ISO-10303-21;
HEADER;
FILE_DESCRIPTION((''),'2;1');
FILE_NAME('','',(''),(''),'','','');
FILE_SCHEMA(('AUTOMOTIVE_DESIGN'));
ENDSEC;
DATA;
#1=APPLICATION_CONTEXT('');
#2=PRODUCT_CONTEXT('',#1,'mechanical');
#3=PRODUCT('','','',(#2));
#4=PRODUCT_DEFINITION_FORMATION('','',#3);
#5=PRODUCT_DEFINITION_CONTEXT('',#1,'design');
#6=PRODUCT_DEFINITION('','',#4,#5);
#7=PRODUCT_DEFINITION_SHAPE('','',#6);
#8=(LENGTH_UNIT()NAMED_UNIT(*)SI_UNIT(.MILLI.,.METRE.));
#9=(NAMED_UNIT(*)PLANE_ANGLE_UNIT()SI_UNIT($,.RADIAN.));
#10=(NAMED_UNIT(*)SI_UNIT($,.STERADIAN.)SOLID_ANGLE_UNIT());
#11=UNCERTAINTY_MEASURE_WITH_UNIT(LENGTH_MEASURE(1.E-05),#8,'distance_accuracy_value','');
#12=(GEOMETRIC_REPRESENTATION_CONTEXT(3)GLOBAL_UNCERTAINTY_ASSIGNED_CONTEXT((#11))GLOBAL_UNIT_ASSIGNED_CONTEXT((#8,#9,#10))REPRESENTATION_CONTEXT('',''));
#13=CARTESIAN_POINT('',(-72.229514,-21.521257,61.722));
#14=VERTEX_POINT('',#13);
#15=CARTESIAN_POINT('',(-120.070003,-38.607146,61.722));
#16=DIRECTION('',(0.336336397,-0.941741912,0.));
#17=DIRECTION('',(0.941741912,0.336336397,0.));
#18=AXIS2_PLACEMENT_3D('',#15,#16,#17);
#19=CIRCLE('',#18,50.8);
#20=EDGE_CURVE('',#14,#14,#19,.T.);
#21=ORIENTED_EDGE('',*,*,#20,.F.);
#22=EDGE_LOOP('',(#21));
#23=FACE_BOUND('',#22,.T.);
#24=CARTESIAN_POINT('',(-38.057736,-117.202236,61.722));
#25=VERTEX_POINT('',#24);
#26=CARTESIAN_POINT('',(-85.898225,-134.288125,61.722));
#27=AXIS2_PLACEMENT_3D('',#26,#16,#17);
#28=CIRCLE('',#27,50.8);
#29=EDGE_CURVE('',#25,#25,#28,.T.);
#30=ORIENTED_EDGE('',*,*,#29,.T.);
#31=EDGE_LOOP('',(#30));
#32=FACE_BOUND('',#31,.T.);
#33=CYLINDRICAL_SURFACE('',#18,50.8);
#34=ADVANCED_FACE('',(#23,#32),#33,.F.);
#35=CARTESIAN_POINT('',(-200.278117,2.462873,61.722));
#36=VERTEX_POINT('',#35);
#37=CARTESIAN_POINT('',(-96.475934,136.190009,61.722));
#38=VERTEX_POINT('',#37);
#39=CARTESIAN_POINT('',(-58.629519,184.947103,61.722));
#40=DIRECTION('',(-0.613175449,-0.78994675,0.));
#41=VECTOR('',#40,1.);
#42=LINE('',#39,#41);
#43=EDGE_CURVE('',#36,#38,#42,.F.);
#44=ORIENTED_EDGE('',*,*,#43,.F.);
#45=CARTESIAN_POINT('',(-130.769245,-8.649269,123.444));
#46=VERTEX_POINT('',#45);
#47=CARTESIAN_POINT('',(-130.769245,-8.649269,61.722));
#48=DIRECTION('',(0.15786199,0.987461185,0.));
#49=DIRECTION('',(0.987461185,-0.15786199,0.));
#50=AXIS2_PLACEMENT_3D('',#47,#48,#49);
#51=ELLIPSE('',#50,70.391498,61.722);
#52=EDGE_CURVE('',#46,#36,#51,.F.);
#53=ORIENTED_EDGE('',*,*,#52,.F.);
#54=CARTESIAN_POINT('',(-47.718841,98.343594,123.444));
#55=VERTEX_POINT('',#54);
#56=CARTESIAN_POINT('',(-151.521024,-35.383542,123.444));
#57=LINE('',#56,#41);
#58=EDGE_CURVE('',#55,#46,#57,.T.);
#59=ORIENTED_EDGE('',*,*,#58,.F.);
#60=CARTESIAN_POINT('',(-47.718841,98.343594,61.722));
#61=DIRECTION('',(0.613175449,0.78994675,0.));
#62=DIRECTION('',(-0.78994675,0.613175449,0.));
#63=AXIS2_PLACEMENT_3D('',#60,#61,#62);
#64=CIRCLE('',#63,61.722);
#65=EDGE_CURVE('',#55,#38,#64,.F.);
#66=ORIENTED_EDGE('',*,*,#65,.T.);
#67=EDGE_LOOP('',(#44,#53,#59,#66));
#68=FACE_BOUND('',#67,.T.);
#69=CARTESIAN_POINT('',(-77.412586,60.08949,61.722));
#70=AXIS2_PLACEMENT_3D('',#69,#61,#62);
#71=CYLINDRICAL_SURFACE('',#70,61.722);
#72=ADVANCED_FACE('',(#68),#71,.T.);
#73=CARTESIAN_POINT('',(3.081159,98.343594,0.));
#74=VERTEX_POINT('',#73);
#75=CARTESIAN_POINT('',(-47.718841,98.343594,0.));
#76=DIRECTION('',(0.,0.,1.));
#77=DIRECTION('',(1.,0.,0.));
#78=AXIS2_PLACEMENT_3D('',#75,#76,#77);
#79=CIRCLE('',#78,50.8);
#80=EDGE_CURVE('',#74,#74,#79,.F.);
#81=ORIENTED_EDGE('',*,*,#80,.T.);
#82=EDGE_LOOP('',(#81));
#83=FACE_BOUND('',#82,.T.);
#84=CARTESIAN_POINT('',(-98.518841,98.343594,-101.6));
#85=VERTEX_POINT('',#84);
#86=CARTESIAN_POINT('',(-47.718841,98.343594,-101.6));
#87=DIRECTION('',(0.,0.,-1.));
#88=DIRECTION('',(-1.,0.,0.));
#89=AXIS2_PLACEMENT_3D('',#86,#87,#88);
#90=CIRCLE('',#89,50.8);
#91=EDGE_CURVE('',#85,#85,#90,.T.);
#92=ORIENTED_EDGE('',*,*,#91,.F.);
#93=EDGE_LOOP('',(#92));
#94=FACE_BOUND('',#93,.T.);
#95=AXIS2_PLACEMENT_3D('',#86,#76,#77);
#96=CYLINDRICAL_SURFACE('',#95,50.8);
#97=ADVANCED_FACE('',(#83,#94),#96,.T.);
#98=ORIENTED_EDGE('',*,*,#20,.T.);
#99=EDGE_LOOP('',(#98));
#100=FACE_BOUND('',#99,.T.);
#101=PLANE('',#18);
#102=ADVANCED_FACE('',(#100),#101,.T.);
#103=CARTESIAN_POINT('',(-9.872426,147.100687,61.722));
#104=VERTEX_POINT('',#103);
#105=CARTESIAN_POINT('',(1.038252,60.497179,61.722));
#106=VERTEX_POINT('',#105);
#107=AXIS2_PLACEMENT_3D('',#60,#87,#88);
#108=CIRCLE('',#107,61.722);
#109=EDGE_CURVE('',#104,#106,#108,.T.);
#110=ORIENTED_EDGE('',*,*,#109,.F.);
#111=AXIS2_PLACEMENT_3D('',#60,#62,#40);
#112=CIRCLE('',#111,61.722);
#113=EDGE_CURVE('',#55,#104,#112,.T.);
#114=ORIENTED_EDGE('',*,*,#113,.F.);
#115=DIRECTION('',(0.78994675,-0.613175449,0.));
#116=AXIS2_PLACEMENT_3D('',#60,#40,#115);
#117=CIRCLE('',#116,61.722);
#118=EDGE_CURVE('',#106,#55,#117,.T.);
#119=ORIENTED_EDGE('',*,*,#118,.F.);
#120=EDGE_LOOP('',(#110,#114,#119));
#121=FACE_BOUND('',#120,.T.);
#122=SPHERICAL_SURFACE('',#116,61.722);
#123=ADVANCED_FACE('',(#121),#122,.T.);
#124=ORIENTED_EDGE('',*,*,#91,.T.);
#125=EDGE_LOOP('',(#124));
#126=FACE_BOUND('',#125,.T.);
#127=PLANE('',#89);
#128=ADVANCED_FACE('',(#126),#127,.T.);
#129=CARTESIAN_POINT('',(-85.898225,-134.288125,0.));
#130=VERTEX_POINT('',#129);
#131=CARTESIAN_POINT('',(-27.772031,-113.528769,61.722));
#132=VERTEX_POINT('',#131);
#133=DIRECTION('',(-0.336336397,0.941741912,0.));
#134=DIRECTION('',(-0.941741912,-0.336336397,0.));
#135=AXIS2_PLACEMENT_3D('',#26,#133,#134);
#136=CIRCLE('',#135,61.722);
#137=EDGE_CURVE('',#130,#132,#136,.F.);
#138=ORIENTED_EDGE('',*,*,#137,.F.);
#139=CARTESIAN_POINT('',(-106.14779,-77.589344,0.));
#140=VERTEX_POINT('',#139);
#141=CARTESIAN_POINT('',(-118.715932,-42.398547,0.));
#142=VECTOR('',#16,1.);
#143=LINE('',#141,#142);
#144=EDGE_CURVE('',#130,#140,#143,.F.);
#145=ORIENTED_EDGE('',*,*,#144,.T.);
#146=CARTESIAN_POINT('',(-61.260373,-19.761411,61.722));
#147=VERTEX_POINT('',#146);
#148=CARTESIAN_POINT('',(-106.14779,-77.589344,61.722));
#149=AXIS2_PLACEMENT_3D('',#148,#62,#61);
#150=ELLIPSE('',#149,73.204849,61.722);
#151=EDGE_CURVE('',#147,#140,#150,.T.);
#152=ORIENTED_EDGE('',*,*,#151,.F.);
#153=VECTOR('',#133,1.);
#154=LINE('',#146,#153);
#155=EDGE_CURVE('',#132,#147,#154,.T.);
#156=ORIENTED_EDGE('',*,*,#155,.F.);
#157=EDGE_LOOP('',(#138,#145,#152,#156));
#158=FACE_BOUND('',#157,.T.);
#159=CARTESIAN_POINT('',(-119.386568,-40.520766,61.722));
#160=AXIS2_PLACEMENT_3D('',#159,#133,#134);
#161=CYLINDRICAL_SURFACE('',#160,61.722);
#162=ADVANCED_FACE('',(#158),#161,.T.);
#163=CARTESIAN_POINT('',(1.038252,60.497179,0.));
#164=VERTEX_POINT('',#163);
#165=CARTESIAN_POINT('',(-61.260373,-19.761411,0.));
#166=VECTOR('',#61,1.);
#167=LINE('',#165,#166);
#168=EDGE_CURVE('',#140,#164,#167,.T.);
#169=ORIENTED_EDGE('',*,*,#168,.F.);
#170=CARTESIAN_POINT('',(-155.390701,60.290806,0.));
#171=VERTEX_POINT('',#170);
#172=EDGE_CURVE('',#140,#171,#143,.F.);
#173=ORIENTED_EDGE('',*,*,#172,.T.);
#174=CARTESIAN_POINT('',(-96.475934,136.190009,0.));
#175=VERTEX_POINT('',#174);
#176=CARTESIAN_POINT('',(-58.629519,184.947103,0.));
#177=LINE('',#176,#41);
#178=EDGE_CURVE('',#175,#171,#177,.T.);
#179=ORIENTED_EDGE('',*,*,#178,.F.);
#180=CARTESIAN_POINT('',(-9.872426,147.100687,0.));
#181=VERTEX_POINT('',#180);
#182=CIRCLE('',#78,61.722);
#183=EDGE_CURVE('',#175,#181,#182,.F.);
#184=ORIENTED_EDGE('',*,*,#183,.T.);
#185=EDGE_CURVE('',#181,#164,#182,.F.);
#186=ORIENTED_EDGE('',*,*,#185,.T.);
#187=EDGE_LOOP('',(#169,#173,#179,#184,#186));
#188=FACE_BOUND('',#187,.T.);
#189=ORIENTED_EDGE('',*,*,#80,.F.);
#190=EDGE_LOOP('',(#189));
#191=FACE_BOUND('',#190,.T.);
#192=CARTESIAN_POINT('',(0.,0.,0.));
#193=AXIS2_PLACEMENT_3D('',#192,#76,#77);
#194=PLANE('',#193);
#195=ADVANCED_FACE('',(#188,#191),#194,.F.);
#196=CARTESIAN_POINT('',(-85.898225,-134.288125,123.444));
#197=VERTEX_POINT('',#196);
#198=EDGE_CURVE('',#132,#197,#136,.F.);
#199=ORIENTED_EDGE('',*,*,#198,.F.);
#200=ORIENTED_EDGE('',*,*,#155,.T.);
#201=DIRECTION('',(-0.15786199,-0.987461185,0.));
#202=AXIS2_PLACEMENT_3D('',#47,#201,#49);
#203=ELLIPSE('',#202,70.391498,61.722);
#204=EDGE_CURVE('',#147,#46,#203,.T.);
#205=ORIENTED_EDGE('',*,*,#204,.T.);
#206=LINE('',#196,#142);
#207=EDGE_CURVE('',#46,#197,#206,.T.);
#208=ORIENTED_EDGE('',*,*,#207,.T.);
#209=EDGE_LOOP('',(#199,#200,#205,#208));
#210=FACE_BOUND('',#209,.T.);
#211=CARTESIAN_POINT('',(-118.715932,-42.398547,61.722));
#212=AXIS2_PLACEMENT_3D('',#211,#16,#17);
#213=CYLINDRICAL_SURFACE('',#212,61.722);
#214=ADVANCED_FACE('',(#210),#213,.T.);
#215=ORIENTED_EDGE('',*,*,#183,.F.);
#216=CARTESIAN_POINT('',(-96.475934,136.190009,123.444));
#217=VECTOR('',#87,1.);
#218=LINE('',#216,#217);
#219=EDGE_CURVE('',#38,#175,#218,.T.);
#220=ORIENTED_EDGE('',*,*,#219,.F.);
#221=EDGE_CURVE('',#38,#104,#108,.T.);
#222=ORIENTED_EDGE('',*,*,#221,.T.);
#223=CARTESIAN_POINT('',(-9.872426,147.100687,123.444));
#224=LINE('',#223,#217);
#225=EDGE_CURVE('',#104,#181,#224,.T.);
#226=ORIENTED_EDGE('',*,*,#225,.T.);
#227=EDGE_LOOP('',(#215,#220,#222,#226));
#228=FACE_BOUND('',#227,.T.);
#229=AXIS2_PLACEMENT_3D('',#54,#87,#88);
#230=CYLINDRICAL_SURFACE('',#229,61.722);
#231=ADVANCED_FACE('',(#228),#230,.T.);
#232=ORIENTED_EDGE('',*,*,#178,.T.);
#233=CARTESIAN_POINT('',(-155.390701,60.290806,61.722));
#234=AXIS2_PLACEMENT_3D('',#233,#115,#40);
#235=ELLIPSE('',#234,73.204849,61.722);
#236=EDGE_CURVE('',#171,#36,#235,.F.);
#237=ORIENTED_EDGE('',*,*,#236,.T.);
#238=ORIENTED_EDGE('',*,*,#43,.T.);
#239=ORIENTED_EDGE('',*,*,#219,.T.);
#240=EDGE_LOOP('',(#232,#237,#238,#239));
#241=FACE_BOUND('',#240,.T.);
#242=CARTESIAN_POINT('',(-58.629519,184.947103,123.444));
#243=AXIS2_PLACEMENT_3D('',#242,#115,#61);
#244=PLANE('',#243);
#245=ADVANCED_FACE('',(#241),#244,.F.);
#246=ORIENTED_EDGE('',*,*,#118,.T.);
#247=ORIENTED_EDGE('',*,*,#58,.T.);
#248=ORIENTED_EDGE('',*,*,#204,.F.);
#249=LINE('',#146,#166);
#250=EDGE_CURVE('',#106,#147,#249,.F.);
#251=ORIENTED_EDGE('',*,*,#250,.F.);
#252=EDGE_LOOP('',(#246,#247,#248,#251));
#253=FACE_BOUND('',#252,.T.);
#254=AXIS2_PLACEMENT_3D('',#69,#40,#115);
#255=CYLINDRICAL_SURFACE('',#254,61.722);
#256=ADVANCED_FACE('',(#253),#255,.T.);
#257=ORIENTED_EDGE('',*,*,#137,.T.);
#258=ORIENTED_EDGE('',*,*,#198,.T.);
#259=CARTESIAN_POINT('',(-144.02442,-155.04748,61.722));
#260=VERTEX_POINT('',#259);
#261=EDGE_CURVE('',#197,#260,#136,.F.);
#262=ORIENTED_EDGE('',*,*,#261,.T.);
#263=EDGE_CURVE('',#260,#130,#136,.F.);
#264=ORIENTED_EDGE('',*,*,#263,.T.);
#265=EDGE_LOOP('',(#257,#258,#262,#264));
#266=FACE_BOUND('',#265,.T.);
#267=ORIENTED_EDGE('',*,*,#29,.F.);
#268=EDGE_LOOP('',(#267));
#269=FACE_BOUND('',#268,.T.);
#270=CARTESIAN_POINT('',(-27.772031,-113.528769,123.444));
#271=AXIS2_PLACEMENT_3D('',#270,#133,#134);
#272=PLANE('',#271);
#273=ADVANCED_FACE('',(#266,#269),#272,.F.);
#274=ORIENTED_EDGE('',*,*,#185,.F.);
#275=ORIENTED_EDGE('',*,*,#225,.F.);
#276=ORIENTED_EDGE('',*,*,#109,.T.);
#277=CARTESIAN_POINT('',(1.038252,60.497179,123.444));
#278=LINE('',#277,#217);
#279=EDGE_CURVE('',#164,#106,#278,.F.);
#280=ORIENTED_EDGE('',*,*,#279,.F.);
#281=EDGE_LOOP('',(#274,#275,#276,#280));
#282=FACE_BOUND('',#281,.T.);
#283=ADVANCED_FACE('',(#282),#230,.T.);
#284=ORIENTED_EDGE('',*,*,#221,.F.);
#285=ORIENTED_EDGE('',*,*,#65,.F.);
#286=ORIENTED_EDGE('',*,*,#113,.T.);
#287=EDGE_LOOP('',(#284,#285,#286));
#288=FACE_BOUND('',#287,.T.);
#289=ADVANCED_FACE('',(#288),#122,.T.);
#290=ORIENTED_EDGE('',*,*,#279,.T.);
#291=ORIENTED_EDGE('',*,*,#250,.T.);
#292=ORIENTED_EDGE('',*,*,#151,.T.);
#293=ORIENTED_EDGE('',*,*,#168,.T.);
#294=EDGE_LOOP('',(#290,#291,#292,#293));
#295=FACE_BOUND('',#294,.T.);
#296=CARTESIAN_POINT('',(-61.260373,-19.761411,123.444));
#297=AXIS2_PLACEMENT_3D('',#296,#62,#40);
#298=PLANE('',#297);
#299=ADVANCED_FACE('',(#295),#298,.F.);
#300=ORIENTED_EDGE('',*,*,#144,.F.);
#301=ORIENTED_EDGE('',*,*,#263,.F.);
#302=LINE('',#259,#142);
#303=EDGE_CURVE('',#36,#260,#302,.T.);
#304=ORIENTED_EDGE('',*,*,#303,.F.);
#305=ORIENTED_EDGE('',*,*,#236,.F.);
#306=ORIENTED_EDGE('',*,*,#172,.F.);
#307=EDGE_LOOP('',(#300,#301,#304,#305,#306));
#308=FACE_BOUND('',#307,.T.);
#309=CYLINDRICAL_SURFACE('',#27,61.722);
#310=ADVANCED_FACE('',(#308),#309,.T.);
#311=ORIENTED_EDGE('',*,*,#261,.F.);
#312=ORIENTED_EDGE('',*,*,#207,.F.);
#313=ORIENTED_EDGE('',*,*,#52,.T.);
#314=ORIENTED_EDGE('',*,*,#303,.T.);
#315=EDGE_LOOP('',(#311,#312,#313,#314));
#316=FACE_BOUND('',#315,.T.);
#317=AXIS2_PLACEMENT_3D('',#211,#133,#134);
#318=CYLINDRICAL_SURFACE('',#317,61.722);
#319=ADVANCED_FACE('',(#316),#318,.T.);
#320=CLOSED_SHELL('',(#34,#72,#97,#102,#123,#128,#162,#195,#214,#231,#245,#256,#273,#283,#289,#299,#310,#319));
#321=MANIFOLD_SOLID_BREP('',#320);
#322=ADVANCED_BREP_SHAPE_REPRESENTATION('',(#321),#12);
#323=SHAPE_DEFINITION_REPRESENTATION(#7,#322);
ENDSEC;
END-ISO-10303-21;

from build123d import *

# Parameters (mm, degrees)
BOSS_EXTRUDE1_DEPTH = 123.444
FILLET1_R           = 61.722
FILLET2_R           = 61.722
SKETCH3_R           = 50.800000000000004
BOSS_EXTRUDE2_DEPTH = 101.6
SKETCH4_R           = 50.8
CUT_EXTRUDE1_DEPTH  = 101.6


with BuildPart() as part:
    # Sketch1 → Boss-Extrude1 (new body)
    with BuildSketch(Plane.XY):
        Polygon((-61.2603734439835, -19.761410788381728), (38.88466731371064, 109.25427234990879), (-58.62951931958517, 184.9471025337958), (-200.27811700244362, 2.4628730865096857), (-144.02441960258417, -155.04747963309688), (-27.772031067671065, -113.52876944205649), align=None)
    extrude(amount=BOSS_EXTRUDE1_DEPTH)

    # Fillet1
    fillet1_edges = [part.edges().sort_by_distance(p)[0] for p in [
        (-44.51620225582728, -66.6450901152191, 123.444),
        (-172.1512683025139, -76.2923032732936, 123.444),
        (-172.1512683025139, -76.2923032732936, 0),
        (-44.51620225582728, -66.6450901152191, 0),
        (-11.187853065136423, 44.74643078076353, 123.444),
        (-129.4538181610144, 93.70498781015274, 123.444),
    ]]
    fillet(fillet1_edges, radius=FILLET1_R - 0.0001)  # a hair under: the kernel refuses the full size

    # Fillet2
    fillet2_edges = [part.edges().sort_by_distance(p)[0] for p in [
        (-58.62951931958517, 184.9471025337958, 30.861050000000017),
        (38.88466731371064, 109.25427234990879, 30.86105000000001),
        (24.604068449214424, 120.33921272724501, 105.36607403771798),
        (-44.34892045508896, 173.86216215645953, 105.366074037718),
    ]]
    fillet(fillet2_edges, radius=FILLET2_R - 0.0001)  # a hair under: the kernel refuses the full size

    # Sketch3 → Boss-Extrude2 (add)
    with BuildSketch(Plane(origin=(0, 0, 0), x_dir=(-1, 0, 0), z_dir=(0, 0, -1))):
        with Locations(Location((47.71884109488077, 98.3435941252044, 0), (0, 0, 180))):
            Circle(SKETCH3_R)
    extrude(amount=BOSS_EXTRUDE2_DEPTH)

    # Sketch4 → Cut-Extrude1 (cut)
    with BuildSketch(Plane(origin=(32.81770626358453, -91.88957753803668, 0), x_dir=(0.9417419115948374, 0.3363363969981563, 0), z_dir=(0.3363363969981563, -0.9417419115948374, 0))):
        with Locations((-126.05994289631548, 61.722)):
            Circle(SKETCH4_R)
    extrude(amount=-CUT_EXTRUDE1_DEPTH, mode=Mode.SUBTRACT)


solid = part.part
